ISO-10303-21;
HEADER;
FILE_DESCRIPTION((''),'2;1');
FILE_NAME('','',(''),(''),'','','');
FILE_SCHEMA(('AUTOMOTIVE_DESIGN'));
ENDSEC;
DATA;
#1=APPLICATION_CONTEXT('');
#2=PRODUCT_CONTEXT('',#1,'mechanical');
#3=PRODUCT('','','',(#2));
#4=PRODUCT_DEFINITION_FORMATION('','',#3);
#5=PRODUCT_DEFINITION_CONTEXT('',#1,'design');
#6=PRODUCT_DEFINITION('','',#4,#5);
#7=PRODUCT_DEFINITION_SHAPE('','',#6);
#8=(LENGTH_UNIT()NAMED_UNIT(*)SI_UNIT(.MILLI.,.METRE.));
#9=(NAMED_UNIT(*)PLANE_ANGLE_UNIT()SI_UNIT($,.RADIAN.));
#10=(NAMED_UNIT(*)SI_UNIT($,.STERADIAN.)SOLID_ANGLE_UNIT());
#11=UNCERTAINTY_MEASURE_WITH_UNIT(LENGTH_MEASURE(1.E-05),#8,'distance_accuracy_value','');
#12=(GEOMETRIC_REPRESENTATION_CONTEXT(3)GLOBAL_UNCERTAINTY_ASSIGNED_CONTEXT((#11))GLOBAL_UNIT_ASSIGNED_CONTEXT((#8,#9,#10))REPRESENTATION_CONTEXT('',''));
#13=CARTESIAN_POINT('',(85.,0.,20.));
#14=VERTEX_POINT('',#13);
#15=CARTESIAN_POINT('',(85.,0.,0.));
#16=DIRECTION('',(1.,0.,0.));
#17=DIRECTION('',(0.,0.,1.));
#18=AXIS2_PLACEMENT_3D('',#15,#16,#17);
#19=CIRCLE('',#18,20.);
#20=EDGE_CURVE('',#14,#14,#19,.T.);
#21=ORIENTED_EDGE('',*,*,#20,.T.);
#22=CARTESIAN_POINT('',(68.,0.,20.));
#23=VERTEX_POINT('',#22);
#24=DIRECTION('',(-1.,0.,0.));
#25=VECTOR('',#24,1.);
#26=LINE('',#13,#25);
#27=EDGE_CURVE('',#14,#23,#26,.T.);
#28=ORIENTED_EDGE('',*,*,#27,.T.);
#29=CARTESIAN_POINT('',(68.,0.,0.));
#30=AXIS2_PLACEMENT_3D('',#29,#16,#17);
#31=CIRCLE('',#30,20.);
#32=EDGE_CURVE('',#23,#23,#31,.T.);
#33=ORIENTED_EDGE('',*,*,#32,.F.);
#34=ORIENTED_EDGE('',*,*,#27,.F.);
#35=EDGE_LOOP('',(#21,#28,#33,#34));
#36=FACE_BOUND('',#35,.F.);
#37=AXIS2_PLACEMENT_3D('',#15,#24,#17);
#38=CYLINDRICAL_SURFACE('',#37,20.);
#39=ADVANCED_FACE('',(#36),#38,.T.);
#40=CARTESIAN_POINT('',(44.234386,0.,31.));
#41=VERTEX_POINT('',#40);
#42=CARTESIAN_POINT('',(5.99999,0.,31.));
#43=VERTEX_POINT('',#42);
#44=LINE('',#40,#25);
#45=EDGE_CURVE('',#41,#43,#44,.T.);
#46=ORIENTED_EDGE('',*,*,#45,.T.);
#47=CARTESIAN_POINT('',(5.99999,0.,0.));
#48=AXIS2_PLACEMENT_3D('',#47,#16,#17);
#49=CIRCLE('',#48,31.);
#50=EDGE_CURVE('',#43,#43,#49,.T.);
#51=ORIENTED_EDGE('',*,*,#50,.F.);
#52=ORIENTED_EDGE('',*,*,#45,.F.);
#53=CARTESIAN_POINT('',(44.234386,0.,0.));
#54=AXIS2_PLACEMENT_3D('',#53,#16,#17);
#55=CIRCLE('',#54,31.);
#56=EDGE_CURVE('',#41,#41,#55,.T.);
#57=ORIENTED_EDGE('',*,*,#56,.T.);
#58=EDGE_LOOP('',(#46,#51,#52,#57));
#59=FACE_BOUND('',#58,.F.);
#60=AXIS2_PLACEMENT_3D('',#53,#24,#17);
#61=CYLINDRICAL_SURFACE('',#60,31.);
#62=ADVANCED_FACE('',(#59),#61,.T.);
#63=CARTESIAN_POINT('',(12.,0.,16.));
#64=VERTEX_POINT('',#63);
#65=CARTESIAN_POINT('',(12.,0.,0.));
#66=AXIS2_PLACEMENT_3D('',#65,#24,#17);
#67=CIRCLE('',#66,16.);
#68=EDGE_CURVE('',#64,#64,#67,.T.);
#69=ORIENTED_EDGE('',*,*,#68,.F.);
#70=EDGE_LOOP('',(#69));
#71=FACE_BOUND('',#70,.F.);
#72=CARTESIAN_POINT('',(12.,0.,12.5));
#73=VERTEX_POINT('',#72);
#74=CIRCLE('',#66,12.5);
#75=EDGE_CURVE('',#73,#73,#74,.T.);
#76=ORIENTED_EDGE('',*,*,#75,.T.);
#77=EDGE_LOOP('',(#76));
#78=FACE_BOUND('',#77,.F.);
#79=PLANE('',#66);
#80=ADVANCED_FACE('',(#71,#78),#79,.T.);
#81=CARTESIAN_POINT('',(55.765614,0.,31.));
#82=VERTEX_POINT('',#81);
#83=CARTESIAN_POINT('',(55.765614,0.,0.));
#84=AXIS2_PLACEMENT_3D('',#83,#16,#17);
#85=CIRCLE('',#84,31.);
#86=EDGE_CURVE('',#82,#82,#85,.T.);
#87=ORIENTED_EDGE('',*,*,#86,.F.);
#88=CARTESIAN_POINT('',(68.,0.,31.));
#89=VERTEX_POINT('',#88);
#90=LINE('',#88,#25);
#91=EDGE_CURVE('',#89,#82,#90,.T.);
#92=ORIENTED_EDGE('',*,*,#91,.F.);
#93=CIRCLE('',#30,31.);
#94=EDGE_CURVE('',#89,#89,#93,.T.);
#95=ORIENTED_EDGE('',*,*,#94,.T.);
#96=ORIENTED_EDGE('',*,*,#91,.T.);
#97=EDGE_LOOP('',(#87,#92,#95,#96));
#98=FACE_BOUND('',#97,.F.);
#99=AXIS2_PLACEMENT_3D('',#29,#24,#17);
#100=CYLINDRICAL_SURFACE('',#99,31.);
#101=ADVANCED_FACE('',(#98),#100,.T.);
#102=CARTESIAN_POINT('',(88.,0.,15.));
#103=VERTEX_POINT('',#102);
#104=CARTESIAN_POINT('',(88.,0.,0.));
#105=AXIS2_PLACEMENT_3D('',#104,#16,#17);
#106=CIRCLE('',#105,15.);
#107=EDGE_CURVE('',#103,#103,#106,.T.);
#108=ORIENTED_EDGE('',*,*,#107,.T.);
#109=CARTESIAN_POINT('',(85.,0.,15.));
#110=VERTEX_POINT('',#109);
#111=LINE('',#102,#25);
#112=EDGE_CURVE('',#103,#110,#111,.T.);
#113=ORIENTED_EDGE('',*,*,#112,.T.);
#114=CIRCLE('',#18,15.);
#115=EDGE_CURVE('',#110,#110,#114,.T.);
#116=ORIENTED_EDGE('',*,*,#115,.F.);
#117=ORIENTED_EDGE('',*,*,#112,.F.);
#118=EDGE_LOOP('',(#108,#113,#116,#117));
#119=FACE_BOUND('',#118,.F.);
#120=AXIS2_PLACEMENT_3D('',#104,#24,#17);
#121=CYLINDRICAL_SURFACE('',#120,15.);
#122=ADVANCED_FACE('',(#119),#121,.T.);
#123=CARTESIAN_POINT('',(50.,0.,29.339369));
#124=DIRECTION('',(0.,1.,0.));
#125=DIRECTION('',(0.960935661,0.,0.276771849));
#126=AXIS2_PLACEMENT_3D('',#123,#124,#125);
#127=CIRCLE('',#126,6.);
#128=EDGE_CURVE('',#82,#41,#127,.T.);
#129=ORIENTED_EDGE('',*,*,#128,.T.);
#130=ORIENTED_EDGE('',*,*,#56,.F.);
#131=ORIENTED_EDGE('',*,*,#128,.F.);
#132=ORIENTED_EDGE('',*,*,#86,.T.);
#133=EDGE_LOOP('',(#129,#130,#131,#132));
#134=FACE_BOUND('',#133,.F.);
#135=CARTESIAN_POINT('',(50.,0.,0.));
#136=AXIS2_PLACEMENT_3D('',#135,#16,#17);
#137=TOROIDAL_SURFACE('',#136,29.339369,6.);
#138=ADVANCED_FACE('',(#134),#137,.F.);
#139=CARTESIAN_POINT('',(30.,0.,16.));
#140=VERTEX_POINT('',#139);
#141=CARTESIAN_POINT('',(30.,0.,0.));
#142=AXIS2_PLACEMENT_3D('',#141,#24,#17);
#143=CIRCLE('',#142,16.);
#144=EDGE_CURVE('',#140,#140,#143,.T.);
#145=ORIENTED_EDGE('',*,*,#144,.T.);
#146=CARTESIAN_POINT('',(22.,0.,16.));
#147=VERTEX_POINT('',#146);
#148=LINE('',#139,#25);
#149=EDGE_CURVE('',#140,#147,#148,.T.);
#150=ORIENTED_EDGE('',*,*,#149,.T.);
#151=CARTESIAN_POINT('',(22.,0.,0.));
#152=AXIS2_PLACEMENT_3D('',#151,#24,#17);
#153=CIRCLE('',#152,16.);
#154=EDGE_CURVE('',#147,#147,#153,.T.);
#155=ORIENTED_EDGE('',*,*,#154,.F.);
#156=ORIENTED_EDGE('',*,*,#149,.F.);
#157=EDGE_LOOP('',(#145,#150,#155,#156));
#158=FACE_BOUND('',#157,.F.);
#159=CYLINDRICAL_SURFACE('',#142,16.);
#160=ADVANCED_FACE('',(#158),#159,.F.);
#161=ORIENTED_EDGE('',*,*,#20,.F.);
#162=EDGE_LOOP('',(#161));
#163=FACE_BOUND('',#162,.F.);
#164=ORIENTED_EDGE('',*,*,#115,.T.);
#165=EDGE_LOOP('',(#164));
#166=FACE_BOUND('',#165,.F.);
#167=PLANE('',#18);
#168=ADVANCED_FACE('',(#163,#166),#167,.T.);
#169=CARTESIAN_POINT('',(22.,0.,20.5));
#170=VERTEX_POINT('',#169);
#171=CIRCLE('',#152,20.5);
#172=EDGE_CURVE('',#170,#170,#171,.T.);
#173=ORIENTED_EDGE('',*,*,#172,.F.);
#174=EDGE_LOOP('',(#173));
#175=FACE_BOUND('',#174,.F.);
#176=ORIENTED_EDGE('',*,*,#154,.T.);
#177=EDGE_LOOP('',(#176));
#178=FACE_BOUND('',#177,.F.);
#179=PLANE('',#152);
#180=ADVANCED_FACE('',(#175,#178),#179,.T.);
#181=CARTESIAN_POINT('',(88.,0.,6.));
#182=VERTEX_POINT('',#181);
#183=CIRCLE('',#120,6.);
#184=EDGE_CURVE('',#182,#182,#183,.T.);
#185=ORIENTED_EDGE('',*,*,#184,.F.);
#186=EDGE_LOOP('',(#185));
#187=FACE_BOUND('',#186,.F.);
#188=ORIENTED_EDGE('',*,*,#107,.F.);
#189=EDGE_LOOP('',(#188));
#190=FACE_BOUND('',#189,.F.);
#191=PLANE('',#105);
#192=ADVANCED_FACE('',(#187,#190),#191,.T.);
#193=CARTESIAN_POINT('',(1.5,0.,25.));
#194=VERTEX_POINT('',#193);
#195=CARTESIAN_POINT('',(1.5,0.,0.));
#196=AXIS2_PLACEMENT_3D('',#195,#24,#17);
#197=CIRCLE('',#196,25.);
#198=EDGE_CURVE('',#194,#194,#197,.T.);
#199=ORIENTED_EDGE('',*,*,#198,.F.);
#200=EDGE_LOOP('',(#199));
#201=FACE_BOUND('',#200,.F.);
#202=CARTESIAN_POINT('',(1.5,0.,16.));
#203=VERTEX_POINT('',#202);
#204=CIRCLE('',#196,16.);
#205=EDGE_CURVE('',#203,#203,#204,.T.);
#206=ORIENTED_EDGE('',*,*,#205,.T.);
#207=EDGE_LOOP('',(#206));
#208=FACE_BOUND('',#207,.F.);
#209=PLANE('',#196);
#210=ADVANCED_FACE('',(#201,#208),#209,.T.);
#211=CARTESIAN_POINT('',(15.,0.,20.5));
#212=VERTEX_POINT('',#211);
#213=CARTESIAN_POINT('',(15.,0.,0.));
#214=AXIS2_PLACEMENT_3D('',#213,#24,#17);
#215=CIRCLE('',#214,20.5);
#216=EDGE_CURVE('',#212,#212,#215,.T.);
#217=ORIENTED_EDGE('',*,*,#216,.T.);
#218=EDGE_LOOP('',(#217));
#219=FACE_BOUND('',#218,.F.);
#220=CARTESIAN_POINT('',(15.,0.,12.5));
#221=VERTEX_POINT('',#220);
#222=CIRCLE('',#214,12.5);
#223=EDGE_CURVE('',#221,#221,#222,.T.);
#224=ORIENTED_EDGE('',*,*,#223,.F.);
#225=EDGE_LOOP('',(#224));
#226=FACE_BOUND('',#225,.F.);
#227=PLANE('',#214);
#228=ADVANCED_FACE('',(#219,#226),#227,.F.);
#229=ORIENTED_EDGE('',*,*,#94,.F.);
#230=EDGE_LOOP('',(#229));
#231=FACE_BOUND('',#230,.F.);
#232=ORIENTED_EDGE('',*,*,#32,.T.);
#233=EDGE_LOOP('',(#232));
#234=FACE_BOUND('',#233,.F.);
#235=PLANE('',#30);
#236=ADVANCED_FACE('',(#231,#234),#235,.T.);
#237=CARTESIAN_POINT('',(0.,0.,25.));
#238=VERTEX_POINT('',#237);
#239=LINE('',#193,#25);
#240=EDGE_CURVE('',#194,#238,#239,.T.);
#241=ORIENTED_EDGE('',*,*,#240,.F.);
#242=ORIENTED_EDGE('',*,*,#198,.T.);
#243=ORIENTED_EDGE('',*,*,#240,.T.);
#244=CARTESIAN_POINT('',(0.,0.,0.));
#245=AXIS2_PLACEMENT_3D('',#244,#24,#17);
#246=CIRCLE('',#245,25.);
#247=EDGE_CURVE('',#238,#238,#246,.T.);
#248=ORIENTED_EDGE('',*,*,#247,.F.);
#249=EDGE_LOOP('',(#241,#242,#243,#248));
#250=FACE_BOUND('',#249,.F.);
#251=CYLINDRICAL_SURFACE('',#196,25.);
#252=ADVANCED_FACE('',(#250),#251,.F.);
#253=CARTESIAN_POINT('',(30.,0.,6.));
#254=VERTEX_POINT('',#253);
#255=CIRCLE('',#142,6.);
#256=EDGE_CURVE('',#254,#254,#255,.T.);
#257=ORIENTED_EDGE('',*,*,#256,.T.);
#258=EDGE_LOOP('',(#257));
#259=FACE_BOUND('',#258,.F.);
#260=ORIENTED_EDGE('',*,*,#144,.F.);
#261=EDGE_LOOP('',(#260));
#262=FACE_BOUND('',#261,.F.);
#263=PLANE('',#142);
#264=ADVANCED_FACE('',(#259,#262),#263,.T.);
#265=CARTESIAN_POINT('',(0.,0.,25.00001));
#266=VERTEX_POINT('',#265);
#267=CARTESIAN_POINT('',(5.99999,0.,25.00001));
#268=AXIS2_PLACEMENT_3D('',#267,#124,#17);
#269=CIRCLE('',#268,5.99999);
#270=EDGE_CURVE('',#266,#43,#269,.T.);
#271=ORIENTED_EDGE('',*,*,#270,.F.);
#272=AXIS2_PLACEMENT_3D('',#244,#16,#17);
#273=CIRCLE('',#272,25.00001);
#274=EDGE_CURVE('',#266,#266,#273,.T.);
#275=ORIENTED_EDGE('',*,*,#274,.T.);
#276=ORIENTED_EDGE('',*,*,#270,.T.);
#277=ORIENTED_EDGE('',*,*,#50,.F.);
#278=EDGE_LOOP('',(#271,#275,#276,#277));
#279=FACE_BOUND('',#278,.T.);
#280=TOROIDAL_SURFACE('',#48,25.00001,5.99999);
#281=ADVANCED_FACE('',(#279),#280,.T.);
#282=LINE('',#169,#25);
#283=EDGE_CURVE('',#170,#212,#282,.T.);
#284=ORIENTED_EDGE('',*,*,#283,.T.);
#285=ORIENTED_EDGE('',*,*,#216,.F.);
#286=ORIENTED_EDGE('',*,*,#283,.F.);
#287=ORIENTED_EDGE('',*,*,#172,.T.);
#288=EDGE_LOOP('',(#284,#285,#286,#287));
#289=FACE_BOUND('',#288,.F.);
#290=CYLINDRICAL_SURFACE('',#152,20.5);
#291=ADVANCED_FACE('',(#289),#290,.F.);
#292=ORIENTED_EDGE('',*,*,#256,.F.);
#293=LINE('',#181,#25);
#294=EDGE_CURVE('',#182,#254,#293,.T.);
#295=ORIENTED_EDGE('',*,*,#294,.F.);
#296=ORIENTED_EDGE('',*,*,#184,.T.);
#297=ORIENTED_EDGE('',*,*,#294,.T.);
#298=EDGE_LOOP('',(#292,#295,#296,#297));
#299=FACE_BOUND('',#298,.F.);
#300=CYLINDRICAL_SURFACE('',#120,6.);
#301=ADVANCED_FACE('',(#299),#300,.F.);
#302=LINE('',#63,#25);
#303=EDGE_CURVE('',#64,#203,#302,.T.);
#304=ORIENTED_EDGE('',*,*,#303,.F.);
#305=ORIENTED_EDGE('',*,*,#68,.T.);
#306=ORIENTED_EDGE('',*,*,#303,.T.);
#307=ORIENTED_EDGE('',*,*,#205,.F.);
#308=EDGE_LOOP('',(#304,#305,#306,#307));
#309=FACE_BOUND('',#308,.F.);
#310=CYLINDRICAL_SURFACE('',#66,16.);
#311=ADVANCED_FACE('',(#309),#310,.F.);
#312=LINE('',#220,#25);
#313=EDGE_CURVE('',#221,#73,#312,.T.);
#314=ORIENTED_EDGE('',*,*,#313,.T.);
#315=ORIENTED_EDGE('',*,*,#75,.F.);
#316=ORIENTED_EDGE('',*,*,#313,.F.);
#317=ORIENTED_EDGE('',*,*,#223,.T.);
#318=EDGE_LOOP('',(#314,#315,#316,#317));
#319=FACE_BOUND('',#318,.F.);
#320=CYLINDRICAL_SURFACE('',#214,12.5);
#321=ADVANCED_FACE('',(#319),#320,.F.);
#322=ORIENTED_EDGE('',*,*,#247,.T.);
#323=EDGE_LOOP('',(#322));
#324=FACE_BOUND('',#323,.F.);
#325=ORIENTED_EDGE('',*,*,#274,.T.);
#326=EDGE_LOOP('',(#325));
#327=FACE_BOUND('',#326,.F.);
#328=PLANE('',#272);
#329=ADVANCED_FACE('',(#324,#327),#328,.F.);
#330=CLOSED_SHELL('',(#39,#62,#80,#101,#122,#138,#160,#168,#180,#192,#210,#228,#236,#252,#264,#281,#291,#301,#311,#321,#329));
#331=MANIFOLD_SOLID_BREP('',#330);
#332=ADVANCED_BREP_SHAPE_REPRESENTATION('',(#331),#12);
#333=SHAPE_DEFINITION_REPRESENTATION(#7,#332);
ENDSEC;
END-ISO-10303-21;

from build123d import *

# Parameters (mm, degrees)
F4_R = 5.99999


# Not quite as in the source:
# - a fillet or chamfer is up to 0.001 mm smaller than in the source, because OpenCascade refuses the exact size


with BuildPart() as f1:
    # F0 (on Front) → F1 (revolve)
    with BuildSketch(Plane.XZ):
        with BuildLine():
            Line((0, 31), (0, 0))
            Line((0, 0), (88, 0))
            Line((88, 0), (88, 15))
            Line((88, 15), (85, 15))
            Line((85, 15), (85, 20))
            Line((85, 20), (68, 20))
            Line((68, 20), (68, 31))
            Line((68, 31), (55.7656139637, 31))
            ThreePointArc((55.7656139637, 31), (50, 23.3393689087), (44.2343860363, 31))
            Line((44.2343860363, 31), (0, 31))
        make_face()
    revolve(axis=Axis((85.9634177689, 0, 0), (1, 0, 0)))

    # F2 (on Front) → F3 (revolve, cut)
    with BuildSketch(Plane.XZ):
        Polygon((0, 25), (0, 0), (88, 0), (88, 6), (30, 6), (30, 12.5), (30, 16), (22, 16), (22, 20.5), (15, 20.5), (15, 12.5), (12, 12.5), (12, 16), (1.5, 16), (1.5, 25), align=None)
    revolve(axis=Axis((-10.4486994627, 0, 0), (-1, 0, 0)), mode=Mode.SUBTRACT)

    # F4 (radius 6 in the source; OpenCascade refuses exactly that, so slightly less here)
    f4_edges = [f1.edges().sort_by_distance(p)[0] for p in [
        (0, 0, -31),
    ]]
    fillet(f4_edges, radius=F4_R)


solid = f1.part
